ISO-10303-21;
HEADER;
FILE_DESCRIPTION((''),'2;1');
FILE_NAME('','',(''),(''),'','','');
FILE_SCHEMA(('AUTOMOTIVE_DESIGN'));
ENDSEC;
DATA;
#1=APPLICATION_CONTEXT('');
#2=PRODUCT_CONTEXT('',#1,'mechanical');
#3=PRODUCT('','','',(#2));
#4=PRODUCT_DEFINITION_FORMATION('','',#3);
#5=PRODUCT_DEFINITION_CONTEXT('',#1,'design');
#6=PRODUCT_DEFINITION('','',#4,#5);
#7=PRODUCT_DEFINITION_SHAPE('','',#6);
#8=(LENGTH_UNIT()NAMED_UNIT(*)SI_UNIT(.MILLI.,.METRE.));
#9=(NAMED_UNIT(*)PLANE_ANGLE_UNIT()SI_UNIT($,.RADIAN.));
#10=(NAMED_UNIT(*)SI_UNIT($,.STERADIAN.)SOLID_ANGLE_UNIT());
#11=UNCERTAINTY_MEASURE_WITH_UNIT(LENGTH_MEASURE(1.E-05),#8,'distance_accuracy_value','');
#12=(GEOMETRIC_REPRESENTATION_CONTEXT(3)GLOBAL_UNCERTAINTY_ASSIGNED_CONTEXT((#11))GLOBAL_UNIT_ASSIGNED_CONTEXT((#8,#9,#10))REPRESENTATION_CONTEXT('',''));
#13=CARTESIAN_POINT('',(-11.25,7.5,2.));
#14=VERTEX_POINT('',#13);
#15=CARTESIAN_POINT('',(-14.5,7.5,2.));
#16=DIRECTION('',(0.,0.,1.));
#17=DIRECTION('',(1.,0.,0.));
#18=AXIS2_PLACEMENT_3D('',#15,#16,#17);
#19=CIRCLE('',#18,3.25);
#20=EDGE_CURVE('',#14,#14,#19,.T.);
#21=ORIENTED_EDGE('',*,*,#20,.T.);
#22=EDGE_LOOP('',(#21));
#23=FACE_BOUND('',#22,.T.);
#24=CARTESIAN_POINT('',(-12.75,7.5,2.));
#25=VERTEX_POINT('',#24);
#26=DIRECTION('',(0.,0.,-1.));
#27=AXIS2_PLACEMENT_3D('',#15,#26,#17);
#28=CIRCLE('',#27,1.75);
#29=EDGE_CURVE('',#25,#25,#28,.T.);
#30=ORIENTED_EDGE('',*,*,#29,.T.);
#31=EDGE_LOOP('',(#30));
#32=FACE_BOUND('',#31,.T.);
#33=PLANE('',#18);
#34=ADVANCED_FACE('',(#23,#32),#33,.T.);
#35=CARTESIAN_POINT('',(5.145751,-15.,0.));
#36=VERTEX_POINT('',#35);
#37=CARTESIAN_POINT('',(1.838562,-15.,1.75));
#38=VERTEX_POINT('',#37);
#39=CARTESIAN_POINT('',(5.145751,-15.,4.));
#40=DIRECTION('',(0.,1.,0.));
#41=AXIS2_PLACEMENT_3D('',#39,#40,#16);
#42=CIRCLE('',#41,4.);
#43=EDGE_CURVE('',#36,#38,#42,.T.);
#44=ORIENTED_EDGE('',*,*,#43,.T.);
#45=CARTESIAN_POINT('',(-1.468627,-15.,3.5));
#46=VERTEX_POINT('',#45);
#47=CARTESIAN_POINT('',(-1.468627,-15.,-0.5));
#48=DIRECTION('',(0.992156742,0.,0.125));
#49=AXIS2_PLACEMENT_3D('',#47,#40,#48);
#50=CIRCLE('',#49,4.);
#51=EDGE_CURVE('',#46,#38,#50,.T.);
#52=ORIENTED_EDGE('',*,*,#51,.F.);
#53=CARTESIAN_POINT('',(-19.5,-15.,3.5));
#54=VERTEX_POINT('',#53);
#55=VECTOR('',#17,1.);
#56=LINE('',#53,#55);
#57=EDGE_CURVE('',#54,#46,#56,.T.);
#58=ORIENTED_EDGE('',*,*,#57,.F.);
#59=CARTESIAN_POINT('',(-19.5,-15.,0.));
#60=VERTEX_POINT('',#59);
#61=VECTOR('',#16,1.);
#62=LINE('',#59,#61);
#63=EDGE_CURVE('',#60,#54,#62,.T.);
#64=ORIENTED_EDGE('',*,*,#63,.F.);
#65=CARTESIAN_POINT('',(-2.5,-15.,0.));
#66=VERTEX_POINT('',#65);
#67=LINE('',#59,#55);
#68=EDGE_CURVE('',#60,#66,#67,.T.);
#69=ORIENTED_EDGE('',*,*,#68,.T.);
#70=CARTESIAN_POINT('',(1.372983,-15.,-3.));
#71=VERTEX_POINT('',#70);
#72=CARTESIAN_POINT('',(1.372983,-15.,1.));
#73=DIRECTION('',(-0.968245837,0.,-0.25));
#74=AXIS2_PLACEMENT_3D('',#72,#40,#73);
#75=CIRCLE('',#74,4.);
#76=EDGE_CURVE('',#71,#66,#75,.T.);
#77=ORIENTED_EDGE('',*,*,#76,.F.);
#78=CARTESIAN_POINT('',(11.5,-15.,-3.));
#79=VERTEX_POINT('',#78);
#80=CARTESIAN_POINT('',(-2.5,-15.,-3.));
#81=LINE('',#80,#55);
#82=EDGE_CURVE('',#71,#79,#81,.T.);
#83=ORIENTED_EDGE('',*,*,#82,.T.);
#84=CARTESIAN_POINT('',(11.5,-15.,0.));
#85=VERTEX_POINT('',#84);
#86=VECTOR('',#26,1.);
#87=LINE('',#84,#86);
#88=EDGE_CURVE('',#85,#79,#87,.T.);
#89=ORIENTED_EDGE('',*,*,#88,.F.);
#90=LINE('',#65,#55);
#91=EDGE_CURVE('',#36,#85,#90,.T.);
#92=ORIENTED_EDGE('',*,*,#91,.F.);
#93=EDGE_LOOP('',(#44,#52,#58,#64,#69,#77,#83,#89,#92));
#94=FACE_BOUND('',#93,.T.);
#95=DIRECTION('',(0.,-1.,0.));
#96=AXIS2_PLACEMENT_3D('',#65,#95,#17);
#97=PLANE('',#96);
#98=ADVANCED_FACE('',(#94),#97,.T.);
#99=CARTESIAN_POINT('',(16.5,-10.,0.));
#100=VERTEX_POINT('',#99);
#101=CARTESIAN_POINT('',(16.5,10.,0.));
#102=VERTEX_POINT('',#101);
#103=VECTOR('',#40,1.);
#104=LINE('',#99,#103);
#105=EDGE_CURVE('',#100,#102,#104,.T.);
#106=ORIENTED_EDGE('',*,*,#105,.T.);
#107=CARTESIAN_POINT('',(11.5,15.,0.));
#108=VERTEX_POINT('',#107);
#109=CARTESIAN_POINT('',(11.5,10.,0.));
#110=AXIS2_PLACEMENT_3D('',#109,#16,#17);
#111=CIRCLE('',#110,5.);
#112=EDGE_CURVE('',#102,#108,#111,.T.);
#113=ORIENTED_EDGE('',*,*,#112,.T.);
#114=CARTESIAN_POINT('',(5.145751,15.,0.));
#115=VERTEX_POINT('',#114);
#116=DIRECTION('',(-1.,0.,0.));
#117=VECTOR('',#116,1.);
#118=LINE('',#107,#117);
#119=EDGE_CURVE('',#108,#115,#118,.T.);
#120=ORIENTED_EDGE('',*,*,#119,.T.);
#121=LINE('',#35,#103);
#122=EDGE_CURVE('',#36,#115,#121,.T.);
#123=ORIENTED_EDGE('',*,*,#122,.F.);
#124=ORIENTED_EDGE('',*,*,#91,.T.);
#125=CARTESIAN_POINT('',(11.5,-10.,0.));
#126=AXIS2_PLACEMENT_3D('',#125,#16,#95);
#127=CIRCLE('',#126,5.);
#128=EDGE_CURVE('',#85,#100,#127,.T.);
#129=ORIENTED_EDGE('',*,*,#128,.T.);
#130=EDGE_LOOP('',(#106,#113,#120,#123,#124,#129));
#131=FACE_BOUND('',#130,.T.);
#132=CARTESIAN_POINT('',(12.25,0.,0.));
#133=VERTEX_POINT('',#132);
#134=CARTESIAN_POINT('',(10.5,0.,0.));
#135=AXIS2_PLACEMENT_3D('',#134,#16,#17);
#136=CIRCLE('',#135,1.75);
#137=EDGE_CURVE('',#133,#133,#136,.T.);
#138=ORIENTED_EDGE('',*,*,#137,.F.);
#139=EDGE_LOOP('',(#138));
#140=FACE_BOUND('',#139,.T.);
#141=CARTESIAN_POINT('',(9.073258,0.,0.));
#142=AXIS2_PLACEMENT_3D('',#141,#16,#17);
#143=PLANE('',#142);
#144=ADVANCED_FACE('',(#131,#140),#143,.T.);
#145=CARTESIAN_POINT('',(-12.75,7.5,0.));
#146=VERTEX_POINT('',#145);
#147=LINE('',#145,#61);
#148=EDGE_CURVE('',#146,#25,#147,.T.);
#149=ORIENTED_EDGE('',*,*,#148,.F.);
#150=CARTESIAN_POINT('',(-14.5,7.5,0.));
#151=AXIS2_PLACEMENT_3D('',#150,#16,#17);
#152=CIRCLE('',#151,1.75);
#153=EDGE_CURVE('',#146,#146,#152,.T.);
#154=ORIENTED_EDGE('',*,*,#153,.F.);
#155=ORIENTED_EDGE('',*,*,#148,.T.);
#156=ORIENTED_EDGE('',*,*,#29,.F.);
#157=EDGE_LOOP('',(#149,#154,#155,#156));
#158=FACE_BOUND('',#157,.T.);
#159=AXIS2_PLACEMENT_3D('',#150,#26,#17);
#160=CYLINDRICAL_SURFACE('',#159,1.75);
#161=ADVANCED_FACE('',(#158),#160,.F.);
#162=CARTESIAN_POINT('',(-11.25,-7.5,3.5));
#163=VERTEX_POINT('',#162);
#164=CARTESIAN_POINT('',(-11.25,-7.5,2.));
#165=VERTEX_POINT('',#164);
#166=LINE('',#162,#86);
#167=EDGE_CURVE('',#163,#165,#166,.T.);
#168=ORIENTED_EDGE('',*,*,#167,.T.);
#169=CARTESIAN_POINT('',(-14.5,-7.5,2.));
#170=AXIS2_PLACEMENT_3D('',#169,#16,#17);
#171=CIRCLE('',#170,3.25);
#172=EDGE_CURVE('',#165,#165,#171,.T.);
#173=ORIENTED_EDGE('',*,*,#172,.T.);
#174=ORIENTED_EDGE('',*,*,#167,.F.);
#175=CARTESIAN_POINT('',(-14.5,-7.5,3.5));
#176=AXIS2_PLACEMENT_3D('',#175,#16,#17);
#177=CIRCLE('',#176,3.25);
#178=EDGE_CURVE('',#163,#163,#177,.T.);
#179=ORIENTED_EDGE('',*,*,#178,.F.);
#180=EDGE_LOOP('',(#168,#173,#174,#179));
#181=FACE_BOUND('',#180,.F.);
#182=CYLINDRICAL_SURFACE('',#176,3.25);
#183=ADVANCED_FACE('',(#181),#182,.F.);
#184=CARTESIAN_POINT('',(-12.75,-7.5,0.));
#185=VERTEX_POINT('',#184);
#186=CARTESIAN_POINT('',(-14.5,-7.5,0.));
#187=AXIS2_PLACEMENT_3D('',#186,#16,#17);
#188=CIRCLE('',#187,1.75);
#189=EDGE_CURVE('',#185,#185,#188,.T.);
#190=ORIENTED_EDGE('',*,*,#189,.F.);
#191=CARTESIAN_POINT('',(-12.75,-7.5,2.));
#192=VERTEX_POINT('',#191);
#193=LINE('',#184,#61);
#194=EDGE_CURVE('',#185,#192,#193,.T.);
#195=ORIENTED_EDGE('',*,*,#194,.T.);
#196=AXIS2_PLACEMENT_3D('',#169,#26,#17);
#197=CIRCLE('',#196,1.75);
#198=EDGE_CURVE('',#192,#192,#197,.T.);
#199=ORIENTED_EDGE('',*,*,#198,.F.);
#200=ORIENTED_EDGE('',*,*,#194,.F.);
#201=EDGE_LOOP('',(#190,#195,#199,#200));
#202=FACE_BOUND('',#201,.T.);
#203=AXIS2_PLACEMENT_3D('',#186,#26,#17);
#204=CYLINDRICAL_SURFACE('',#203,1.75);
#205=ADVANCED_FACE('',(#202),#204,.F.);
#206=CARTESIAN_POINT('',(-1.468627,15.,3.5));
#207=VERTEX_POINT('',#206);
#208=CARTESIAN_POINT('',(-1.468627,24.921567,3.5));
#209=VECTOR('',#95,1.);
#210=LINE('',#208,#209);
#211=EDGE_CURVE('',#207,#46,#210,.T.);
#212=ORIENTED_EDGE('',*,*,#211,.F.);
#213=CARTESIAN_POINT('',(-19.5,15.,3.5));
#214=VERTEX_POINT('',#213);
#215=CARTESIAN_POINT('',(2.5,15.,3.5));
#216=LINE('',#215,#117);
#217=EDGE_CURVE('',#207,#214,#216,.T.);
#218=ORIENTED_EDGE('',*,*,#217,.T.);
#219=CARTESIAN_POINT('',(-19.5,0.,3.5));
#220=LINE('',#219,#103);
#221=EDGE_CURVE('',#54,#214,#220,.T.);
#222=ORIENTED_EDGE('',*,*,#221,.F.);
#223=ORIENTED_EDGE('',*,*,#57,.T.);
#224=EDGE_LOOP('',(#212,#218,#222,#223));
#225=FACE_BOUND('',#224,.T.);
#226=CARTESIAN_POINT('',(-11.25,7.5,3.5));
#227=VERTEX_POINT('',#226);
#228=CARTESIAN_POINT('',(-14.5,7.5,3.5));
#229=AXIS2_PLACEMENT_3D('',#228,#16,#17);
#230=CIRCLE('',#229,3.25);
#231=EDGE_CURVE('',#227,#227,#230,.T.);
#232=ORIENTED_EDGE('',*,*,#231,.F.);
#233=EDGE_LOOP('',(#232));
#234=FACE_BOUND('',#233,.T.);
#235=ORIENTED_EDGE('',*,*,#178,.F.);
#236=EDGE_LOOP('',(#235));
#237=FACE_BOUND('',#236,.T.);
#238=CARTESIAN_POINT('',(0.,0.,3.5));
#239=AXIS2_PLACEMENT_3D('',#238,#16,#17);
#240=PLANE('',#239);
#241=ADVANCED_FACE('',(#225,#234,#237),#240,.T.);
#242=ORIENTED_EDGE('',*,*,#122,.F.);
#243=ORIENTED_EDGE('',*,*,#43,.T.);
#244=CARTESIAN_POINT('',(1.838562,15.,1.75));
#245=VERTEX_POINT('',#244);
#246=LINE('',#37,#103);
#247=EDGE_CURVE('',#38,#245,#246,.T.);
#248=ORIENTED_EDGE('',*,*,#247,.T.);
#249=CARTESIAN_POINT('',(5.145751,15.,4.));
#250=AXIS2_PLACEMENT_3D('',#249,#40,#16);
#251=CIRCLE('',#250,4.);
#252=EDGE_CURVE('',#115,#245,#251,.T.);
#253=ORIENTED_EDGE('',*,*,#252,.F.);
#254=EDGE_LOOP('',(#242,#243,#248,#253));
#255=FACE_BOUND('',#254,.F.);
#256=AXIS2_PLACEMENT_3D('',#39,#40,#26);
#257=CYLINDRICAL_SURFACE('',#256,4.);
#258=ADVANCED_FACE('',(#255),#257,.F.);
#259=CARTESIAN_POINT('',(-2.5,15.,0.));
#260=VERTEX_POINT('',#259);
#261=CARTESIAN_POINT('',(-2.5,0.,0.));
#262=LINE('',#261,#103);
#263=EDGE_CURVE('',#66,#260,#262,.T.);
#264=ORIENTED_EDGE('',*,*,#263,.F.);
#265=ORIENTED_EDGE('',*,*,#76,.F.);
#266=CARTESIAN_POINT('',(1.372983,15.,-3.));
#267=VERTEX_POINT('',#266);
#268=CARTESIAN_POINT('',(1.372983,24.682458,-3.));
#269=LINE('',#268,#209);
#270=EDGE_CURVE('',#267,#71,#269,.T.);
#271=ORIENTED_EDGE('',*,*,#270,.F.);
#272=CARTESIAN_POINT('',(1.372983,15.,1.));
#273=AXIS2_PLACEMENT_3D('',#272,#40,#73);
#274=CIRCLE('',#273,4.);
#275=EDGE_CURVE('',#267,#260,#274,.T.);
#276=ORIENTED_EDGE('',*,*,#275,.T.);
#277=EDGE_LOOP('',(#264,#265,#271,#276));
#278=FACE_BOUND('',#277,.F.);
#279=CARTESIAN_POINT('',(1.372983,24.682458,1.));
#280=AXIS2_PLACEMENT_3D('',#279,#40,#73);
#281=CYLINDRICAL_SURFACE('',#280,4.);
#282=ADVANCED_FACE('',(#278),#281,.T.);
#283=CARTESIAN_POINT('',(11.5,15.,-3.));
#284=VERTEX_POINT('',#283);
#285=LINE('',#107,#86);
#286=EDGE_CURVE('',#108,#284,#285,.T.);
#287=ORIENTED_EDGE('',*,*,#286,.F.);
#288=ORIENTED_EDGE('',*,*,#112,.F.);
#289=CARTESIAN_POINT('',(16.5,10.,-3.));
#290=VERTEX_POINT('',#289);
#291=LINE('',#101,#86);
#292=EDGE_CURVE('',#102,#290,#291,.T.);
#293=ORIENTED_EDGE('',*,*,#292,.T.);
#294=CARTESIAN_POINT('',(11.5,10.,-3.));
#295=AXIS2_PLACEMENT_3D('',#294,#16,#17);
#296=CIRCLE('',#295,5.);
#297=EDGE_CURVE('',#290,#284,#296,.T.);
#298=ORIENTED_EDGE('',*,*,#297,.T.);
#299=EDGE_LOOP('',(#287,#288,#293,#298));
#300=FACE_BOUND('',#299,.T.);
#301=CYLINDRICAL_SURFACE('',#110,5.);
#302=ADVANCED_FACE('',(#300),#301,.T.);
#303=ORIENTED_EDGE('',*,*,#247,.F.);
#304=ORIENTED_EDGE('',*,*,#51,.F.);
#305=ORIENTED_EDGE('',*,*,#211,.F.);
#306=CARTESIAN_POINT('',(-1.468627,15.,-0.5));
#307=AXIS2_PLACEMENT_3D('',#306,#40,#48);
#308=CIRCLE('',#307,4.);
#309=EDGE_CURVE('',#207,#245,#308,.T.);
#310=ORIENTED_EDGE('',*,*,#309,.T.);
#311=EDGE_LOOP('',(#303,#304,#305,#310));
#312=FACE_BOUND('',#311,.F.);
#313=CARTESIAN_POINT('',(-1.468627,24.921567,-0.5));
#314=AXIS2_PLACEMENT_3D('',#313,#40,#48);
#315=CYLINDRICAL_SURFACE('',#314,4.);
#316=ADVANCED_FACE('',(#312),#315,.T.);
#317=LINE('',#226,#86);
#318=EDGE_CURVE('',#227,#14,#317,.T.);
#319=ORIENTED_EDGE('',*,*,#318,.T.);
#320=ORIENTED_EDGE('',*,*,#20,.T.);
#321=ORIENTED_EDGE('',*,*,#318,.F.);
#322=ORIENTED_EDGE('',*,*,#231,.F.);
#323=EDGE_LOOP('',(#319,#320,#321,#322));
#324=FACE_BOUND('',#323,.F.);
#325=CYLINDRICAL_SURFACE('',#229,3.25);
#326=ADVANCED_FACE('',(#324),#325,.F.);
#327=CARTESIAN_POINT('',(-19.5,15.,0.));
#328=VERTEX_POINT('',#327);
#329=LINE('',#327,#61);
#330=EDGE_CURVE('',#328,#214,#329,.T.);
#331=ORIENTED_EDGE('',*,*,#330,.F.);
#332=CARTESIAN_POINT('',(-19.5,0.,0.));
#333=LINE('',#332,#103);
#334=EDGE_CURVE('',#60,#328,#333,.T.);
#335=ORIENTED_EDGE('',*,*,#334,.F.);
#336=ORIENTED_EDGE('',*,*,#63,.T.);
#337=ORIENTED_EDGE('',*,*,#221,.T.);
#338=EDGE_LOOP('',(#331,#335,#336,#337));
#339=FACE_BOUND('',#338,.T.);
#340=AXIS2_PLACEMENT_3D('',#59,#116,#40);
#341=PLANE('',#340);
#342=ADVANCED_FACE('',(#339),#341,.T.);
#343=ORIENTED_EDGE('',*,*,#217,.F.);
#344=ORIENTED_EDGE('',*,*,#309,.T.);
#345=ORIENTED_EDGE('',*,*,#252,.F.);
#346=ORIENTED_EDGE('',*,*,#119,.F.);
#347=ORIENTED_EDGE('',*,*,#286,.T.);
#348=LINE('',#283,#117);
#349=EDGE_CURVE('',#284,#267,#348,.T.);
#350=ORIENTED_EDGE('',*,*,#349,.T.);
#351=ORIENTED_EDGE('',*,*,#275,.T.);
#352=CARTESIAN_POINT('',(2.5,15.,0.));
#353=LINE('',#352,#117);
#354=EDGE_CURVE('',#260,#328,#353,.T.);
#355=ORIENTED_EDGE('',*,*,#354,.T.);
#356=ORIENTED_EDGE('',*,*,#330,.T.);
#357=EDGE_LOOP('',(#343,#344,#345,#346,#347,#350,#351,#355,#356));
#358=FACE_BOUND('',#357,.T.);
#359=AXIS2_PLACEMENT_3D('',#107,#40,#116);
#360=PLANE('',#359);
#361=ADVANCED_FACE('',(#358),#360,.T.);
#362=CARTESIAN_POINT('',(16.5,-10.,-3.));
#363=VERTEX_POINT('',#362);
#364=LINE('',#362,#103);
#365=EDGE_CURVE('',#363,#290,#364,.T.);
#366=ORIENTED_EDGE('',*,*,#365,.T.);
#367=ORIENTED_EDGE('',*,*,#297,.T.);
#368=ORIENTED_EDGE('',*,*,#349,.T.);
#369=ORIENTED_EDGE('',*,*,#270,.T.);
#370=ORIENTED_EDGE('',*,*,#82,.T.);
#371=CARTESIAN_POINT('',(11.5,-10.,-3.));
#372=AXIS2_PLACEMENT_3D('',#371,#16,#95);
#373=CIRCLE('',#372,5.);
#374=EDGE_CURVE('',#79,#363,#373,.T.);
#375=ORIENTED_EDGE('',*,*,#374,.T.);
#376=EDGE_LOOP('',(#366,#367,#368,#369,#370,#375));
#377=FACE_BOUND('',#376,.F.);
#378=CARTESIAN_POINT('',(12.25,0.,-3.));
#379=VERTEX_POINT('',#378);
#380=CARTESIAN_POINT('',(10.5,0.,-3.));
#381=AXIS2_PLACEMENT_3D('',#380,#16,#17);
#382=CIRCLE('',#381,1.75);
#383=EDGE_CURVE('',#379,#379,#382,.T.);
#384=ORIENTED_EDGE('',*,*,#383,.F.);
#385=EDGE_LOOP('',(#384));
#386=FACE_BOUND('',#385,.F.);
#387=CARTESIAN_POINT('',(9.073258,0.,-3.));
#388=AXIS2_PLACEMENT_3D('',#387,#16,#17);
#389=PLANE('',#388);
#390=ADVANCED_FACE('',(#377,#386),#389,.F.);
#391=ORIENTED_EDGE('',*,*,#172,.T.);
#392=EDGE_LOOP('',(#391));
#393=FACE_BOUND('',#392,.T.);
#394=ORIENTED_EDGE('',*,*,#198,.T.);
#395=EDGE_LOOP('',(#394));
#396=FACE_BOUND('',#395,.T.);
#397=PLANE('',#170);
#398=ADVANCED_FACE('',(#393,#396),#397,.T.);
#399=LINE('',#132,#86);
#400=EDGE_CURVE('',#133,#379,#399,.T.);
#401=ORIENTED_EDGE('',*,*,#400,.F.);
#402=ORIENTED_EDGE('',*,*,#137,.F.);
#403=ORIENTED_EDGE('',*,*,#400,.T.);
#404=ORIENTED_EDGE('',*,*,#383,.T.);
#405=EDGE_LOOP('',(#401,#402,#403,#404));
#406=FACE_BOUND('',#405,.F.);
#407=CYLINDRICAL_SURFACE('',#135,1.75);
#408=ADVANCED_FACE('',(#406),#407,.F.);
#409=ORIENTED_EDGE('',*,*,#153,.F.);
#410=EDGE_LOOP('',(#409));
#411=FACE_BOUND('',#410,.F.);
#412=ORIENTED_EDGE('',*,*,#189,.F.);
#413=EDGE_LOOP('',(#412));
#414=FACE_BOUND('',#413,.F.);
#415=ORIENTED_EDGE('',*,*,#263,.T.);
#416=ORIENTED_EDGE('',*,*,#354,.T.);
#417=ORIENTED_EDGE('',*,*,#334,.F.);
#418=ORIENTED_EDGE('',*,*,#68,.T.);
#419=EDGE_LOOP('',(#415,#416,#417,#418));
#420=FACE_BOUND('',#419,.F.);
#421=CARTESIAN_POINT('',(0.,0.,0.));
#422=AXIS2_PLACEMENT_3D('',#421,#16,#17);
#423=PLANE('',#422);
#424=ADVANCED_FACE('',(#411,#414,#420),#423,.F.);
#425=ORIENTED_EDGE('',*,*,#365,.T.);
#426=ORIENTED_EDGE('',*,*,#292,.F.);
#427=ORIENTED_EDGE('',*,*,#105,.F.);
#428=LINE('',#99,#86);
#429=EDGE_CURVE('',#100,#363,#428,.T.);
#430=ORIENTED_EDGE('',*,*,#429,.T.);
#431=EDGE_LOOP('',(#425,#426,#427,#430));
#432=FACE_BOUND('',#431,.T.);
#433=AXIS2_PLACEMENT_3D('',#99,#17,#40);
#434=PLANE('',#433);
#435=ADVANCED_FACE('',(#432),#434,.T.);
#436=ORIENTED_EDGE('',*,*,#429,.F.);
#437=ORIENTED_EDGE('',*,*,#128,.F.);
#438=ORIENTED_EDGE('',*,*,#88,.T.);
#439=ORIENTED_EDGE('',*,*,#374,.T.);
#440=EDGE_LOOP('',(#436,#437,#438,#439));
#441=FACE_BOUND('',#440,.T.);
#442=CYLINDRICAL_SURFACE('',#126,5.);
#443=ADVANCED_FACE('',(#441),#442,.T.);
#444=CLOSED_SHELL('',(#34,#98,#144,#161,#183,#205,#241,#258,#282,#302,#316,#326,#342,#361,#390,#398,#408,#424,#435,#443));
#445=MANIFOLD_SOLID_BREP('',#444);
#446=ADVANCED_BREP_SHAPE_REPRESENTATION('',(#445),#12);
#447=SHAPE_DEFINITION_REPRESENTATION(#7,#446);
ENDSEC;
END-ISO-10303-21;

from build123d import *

# Parameters (mm, degrees)
F0_W        = 5
F0_H        = 30
F0_W_2      = 17
F0_R        = 1.75
F1_DEPTH    = 3.5
F2_DEPTH    = 3
F3_T1_DEPTH = 49.843134833
F3_T3_DEPTH = 49.364916731
F4_R        = 3.25
F5_DEPTH    = 1.5
F6_R        = 4


# Not quite as in the source:
# - a fillet or chamfer that OpenCascade refuses, or shapes differently, is made with other operations: its cross-section is extruded or revolved along the edge and cut away or added


with BuildPart() as f1:
    # F0 (on Top) → F1 (new body)
    with BuildSketch(Plane.XY):
        Rectangle(F0_W, F0_H)
        with Locations((-11, 0)):
            Rectangle(F0_W_2, F0_H)
        with Locations((-14.5, -7.5)):
            Circle(F0_R, mode=Mode.SUBTRACT)
        with Locations((-14.5, 7.5)):
            Circle(F0_R, mode=Mode.SUBTRACT)
    extrude(amount=F1_DEPTH)

    # F0 (on Top) → F2 (join)
    with BuildSketch(Plane.XY):
        with BuildLine():
            Line((11.5, 15), (2.5, 15))
            Line((2.5, 15), (2.5, -15))
            Line((2.5, -15), (11.5, -15))
            ThreePointArc((11.5, -15), (15.0355339059, -13.5355339059), (16.5, -10))
            Line((16.5, -10), (16.5, 10))
            ThreePointArc((16.5, 10), (15.0355339059, 13.5355339059), (11.5, 15))
        make_face()
        with Locations((10.5, 0)):
            Circle(F0_R, mode=Mode.SUBTRACT)
        Rectangle(F0_W, F0_H)
    extrude(amount=-F2_DEPTH)

    # F3: fillet of radius 4 on 2 edges, made by hand

    # F3_s2 → F3_t1 (cut)
    with BuildSketch(Plane.XZ.offset(-24.9215674165)):
        with BuildLine():
            ThreePointArc((2.5, 0), (1.1771243445, 2.5), (-1.4686269666, 3.5))
            Line((-1.4686269666, 3.5), (2.5, 3.5))
            Line((2.5, 3.5), (2.5, 0))
        make_face()
    extrude(amount=F3_T1_DEPTH, mode=Mode.SUBTRACT)

    # F3_s4 → F3_t3 (cut)
    with BuildSketch(Plane.XZ.offset(-24.6824583655)):
        with BuildLine():
            ThreePointArc((-2.5, 0), (-1.0765063966, -2.1622776602), (1.3729833462, -3))
            Line((1.3729833462, -3), (-2.5, -3))
            Line((-2.5, -3), (-2.5, 0))
        make_face()
    extrude(amount=F3_T3_DEPTH, mode=Mode.SUBTRACT)

    # F4 (on face) → F5 (cut)
    with BuildSketch(Plane.XY.offset(3.5)):
        with Locations((-14.5, 7.5)):
            Circle(F4_R)
        with Locations((-14.5, -7.5)):
            Circle(F4_R)
    extrude(amount=-F5_DEPTH, mode=Mode.SUBTRACT)

    # F6
    f6_edges = [f1.edges().sort_by_distance(p)[0] for p in [
        (2.5, 0, 0),
    ]]
    fillet(f6_edges, radius=F6_R)


solid = f1.part
